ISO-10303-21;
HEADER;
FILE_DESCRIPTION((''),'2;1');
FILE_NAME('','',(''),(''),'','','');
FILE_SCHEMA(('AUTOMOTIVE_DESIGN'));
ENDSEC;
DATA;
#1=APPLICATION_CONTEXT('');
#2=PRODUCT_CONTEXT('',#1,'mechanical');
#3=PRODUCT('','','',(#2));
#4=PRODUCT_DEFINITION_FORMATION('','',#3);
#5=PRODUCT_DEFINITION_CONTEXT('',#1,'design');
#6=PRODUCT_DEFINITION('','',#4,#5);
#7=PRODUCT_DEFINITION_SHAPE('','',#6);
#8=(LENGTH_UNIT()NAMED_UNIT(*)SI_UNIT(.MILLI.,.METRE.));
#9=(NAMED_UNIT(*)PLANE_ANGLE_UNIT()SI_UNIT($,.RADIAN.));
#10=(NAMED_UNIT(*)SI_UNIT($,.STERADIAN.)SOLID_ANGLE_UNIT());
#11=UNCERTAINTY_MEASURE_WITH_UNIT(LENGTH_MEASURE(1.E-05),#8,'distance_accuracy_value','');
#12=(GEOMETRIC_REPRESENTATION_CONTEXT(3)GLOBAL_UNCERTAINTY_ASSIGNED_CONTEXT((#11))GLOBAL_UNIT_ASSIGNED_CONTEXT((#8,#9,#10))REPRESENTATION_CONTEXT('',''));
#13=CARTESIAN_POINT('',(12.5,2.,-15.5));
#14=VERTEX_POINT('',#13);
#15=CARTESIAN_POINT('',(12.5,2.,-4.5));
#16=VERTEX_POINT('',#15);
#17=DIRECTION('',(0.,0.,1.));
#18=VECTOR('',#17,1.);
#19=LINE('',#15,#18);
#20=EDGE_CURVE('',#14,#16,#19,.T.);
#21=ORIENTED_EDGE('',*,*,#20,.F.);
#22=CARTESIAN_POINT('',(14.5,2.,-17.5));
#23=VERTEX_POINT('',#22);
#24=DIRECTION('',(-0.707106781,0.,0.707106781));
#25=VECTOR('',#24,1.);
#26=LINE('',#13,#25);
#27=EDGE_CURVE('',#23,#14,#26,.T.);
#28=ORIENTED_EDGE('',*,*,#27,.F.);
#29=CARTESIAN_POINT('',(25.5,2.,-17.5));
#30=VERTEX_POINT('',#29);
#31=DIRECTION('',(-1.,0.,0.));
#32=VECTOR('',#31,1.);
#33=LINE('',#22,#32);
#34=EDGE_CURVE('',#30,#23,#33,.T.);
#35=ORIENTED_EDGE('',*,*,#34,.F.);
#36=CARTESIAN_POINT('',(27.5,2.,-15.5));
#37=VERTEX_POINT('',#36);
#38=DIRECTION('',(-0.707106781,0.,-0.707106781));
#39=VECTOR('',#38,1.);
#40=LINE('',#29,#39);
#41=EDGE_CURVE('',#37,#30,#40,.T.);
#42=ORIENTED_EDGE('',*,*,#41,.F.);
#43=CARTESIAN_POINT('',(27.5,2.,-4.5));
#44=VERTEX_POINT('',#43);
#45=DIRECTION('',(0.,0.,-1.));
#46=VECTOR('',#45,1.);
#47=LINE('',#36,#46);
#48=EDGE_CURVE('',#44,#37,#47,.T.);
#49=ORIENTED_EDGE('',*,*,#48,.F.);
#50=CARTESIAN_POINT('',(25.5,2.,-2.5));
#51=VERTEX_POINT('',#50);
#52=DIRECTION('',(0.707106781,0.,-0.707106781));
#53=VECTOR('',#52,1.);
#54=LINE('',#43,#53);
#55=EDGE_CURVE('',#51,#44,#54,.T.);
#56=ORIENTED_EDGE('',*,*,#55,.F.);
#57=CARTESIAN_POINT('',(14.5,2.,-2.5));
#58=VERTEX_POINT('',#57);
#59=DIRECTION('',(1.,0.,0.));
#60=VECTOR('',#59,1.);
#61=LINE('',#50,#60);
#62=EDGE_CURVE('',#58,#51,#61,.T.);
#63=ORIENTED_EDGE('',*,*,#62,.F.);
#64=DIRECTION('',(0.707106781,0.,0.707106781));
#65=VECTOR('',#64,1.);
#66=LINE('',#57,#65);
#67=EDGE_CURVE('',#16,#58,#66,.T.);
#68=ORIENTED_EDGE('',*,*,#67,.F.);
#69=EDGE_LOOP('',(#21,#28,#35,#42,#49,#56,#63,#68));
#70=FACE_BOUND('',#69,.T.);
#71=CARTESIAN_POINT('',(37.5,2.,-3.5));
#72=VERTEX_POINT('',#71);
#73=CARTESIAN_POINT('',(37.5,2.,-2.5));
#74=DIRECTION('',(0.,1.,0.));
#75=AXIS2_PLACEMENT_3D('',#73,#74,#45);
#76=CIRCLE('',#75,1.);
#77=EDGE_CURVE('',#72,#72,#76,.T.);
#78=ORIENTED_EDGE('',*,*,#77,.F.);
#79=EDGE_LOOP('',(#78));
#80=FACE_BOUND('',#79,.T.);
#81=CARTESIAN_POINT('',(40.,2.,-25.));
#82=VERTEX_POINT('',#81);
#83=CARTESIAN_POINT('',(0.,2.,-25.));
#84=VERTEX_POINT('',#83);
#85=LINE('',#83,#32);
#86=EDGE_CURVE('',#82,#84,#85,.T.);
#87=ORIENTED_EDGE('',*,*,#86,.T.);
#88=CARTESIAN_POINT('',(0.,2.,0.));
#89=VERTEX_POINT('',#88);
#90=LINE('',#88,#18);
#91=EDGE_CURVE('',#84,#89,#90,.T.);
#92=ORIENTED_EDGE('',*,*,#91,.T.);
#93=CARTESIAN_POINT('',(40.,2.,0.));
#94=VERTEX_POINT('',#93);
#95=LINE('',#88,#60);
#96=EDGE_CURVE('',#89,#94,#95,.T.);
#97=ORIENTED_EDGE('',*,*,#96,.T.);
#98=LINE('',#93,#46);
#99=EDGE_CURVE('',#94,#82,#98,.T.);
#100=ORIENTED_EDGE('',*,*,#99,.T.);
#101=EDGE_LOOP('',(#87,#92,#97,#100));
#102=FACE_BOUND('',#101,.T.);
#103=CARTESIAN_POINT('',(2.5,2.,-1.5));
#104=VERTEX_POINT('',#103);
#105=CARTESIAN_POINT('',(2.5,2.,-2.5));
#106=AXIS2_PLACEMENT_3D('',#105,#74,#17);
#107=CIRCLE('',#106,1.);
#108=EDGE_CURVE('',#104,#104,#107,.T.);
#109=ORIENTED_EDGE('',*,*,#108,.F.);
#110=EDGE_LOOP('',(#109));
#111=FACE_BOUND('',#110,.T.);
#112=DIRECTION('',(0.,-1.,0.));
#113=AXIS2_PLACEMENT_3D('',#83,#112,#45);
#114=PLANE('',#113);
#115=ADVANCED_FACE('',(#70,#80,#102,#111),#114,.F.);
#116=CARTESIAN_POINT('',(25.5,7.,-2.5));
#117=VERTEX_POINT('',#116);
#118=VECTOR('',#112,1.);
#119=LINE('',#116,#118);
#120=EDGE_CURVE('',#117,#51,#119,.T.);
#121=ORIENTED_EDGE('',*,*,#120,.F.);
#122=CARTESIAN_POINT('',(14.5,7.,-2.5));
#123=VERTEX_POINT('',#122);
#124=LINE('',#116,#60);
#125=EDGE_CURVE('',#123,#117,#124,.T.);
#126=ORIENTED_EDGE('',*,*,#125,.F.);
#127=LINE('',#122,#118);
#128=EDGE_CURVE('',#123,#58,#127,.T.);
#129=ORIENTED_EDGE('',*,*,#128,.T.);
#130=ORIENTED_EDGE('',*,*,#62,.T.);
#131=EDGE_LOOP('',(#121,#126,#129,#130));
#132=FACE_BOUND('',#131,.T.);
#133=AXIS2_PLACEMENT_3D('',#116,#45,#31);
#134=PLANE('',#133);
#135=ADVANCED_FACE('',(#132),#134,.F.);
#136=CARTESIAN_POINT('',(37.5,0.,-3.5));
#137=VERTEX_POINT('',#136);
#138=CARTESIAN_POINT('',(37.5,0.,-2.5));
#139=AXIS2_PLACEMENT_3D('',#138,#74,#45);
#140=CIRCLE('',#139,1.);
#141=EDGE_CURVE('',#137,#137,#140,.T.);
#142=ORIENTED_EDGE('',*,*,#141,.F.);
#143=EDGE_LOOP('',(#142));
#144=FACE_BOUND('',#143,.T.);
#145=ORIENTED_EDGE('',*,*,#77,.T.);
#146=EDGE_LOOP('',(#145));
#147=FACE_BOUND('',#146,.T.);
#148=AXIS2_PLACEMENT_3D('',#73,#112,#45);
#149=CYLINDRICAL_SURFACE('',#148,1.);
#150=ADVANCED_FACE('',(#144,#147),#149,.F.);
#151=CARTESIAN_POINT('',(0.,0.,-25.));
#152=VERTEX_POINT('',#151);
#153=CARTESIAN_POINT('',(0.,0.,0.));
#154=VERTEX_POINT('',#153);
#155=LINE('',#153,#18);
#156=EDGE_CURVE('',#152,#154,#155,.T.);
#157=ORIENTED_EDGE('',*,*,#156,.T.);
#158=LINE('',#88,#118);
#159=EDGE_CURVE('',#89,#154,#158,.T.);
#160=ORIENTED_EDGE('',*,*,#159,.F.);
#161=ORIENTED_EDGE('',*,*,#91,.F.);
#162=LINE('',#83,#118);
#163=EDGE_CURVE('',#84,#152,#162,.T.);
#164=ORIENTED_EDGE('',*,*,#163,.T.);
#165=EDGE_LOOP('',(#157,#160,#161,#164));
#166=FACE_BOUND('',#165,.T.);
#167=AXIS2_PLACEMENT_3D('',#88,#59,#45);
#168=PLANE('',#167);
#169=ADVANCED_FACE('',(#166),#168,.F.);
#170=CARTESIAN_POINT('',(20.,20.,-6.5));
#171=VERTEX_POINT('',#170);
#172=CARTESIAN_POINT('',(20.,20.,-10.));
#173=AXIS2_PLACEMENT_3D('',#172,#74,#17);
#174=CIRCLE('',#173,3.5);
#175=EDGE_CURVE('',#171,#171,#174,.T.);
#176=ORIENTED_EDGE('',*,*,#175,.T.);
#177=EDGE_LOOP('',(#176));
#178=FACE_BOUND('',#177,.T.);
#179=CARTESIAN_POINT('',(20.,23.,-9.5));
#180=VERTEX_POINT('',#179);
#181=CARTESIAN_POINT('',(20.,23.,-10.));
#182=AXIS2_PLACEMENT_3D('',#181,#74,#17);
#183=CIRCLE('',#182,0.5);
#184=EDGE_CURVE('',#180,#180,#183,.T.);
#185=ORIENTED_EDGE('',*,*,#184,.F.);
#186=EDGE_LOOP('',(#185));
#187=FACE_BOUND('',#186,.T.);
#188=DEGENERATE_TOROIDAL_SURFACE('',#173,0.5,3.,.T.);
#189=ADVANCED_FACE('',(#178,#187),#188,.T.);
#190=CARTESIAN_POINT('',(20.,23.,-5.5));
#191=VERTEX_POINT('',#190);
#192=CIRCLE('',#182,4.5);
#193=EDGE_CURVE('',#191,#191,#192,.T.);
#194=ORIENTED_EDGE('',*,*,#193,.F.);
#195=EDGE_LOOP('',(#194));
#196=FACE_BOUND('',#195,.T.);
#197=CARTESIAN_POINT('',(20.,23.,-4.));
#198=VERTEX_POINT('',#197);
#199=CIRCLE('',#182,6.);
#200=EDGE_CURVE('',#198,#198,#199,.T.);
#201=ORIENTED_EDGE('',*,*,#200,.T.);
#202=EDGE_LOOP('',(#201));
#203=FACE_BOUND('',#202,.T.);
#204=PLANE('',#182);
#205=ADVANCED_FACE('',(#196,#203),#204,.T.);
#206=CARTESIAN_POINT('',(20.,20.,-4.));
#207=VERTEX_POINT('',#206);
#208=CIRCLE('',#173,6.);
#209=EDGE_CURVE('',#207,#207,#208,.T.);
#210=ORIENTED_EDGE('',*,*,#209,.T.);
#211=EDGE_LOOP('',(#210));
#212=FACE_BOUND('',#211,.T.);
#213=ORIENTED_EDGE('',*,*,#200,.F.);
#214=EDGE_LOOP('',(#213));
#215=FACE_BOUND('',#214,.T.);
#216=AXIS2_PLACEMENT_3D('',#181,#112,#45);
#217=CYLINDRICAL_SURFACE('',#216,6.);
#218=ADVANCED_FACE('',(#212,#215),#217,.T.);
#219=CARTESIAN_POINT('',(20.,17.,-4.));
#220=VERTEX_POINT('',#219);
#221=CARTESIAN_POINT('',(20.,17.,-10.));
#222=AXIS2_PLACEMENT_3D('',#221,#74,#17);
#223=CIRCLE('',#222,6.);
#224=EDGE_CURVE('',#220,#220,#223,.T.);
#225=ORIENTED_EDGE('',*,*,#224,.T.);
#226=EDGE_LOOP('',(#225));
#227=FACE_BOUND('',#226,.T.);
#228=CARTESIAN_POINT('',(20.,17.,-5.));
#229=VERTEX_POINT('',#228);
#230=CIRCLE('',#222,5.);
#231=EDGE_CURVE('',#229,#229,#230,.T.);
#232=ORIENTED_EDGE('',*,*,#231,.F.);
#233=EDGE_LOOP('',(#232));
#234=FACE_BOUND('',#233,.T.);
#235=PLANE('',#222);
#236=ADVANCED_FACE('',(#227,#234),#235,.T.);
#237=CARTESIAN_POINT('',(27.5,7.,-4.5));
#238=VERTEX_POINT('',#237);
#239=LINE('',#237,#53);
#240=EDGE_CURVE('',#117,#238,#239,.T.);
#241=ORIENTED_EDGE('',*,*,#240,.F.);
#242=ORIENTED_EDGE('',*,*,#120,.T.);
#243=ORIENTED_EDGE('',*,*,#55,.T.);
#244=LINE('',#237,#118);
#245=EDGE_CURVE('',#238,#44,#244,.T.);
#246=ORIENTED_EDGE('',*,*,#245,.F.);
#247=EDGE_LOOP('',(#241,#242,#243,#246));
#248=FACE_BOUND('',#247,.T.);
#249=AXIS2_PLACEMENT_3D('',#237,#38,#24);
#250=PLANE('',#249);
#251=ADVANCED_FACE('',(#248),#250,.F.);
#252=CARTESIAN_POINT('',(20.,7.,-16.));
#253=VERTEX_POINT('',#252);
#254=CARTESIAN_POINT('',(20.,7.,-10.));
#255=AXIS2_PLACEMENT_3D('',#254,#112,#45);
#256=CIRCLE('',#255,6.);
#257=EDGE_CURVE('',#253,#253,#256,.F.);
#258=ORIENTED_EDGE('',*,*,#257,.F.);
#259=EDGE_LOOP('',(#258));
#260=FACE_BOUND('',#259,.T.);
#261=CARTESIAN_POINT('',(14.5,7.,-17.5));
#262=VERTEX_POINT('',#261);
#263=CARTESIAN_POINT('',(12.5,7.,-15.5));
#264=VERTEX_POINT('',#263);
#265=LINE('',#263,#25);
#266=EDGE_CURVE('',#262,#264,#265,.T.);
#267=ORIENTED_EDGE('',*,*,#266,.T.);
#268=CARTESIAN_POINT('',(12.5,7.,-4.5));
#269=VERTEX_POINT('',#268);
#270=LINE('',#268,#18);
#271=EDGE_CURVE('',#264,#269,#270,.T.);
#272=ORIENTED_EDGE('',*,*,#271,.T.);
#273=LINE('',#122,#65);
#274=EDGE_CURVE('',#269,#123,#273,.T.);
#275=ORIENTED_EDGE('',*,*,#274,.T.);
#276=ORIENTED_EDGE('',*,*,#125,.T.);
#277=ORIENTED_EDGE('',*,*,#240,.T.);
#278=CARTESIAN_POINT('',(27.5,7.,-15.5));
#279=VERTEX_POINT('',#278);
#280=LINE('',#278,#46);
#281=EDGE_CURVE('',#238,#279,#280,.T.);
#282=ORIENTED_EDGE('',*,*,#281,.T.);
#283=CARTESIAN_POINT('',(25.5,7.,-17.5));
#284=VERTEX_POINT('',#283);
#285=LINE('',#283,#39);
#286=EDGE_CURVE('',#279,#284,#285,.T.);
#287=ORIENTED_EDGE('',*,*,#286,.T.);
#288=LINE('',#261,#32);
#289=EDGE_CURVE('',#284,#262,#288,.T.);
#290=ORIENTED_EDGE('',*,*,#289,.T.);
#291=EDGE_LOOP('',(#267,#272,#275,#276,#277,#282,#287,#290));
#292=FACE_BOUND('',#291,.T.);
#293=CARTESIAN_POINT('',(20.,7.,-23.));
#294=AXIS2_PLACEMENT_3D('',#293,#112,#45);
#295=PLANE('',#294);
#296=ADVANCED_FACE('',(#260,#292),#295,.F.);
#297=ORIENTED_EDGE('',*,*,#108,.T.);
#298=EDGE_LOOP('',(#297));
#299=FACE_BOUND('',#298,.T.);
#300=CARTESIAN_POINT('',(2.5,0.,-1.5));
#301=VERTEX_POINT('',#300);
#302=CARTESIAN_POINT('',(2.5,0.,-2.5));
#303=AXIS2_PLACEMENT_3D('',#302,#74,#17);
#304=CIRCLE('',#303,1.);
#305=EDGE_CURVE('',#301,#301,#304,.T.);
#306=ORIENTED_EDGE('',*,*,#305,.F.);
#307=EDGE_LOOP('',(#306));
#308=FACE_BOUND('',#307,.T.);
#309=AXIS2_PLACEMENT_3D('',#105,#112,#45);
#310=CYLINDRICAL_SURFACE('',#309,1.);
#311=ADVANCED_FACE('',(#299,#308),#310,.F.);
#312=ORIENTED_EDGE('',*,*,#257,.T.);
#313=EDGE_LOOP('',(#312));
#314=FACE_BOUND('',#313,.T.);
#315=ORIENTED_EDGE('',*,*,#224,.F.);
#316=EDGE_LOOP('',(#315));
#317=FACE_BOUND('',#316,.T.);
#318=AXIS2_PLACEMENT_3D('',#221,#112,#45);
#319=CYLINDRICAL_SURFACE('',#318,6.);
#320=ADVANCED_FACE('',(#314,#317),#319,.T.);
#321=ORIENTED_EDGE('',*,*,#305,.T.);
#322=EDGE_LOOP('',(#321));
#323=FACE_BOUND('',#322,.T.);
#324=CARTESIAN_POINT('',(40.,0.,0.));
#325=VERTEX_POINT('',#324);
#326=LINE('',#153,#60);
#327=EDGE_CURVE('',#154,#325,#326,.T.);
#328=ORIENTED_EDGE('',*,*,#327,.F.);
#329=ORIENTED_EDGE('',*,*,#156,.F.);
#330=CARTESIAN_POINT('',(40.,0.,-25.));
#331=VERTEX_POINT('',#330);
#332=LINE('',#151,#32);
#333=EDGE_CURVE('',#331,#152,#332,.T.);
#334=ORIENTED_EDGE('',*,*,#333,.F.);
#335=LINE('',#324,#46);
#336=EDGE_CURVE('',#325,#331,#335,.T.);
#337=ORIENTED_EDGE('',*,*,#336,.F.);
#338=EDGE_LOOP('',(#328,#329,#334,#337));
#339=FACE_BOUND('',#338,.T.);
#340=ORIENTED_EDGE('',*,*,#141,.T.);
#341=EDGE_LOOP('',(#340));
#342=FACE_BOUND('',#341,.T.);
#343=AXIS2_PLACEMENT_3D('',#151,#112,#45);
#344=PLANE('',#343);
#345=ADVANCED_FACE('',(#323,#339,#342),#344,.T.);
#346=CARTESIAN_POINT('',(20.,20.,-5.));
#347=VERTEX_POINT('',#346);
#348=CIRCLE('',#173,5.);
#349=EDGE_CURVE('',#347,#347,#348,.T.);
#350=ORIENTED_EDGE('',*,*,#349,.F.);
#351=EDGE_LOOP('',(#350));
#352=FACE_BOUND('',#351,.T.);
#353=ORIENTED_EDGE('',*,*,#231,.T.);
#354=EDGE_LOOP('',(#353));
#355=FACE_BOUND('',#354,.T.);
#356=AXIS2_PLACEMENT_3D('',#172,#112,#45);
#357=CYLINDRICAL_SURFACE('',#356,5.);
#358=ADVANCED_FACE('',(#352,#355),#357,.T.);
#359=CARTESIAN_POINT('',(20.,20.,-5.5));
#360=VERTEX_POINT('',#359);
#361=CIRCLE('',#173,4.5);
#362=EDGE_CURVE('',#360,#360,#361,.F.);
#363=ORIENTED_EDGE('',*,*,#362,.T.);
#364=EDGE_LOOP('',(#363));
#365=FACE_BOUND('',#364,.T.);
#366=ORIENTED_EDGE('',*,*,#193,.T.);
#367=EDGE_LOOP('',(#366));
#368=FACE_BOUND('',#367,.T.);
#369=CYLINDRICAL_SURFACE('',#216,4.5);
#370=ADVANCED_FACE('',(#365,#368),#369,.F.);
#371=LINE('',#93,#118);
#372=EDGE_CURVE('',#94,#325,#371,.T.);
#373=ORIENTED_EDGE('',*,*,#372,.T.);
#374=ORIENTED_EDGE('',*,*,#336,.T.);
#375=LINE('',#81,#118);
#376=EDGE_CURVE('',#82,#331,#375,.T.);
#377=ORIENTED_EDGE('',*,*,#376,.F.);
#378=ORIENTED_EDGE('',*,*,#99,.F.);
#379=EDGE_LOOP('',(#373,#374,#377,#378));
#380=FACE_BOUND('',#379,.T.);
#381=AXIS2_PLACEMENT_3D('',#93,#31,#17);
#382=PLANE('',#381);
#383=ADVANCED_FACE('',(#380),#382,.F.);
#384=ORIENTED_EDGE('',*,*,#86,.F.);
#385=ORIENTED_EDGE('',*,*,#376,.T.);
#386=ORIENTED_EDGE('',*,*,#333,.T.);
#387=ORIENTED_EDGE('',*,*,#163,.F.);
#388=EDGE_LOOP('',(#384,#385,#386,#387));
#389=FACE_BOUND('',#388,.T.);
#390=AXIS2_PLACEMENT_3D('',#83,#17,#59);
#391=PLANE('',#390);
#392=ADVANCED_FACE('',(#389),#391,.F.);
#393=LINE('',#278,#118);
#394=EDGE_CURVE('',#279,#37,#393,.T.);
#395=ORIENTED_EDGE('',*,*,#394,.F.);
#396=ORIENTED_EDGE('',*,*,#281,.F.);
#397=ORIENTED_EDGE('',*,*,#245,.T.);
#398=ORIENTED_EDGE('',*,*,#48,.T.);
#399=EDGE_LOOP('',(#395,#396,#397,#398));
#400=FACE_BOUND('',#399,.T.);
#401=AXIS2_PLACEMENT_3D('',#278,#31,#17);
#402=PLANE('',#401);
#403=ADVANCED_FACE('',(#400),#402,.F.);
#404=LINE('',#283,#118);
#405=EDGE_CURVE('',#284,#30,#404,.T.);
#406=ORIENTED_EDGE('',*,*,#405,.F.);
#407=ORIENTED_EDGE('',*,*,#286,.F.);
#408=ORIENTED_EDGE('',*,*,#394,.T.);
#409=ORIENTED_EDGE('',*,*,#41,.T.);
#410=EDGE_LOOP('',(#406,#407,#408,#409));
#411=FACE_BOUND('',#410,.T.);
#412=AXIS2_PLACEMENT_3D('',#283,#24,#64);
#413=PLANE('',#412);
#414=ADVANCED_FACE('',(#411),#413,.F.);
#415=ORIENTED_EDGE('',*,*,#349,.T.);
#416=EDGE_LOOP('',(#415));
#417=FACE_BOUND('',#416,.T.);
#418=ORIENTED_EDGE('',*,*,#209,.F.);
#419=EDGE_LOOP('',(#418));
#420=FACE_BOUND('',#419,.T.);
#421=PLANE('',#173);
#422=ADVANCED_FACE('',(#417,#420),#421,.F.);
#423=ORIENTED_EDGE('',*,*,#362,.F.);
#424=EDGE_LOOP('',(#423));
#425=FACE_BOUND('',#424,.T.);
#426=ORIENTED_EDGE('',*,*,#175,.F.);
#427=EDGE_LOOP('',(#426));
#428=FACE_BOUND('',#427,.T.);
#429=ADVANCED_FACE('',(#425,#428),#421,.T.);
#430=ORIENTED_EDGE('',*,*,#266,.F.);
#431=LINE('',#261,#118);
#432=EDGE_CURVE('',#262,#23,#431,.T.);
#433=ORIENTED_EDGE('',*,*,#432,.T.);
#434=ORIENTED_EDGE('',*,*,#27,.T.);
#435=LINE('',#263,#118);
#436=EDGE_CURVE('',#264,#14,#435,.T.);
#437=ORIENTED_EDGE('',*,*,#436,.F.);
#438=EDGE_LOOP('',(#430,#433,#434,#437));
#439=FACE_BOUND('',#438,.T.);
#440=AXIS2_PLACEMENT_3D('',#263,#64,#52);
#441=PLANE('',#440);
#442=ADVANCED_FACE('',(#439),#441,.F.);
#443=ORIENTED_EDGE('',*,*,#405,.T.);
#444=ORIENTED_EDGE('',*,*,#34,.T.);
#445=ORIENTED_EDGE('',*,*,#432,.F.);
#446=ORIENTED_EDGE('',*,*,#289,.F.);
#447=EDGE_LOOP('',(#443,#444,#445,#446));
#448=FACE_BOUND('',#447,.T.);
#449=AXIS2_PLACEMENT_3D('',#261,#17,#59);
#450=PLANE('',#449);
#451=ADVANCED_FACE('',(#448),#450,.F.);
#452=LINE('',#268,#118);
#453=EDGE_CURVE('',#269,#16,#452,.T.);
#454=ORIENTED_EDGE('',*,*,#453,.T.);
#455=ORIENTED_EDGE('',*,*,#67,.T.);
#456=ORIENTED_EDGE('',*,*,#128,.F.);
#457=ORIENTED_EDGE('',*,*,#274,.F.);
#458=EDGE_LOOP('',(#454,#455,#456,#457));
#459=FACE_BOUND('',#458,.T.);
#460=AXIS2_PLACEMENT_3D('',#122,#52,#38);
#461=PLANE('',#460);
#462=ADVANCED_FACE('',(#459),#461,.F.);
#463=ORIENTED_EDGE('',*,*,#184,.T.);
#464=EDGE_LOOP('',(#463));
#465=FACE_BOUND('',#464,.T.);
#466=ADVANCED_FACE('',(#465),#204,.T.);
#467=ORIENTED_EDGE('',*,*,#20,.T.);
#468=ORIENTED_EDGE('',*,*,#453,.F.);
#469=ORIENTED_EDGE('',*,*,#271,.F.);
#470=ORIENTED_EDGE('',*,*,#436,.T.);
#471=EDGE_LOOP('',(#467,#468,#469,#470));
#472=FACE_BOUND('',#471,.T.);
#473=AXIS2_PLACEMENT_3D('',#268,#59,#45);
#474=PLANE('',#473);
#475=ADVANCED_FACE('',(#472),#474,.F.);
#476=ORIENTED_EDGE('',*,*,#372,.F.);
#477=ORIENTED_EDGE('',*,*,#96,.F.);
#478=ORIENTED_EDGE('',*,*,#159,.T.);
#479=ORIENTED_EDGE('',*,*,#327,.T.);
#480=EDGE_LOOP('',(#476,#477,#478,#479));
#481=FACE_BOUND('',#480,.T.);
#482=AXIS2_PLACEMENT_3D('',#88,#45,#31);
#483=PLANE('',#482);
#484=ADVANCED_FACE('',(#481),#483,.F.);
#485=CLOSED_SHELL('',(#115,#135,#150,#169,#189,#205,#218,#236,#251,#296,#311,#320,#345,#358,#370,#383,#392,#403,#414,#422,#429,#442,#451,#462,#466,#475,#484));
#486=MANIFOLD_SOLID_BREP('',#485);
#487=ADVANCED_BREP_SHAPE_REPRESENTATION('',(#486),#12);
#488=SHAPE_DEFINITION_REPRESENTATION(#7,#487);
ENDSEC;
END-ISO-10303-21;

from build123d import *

# Parameters (mm, degrees)
ESQUISSE1_W      = 40
ESQUISSE1_H      = 25
ESQUISSE1_R      = 1
EXTRUSION1_DEPTH = 2
EXTRUSION2_DEPTH = 5
ESQUISSE3_R      = 6
EXTRUSION3_DEPTH = 10
ESQUISSE4_R      = 5
EXTRUSION4_DEPTH = 3
ESQUISSE5_R      = 6
ESQUISSE5_R_2    = 4.5
EXTRUSION5_DEPTH = 3
ESQUISSE6_R      = 3.5
EXTRUSION6_DEPTH = 3
CONG_1_R         = 3


with BuildPart() as part:
    # Esquisse1 → Extrusion1 (new body)
    with BuildSketch(Plane(origin=(0, 0, 0), x_dir=(1, 0, 0), z_dir=(0, 1, 0))):
        with Locations((20, 12.5)):
            Rectangle(ESQUISSE1_W, ESQUISSE1_H)
        with Locations(Location((2.5, 2.5, 0), (0, 0, 270))):
            Circle(ESQUISSE1_R, mode=Mode.SUBTRACT)
        with Locations(Location((37.5, 2.5, 0), (0, 0, 90))):
            Circle(ESQUISSE1_R, mode=Mode.SUBTRACT)
    extrude(amount=EXTRUSION1_DEPTH)

    # Esquisse2 → Extrusion2 (add)
    with BuildSketch(Plane(origin=(0, 2, 0), x_dir=(-1, 0, 0), z_dir=(0, 1, 0))):
        Polygon((-14.5, -17.5), (-25.5, -17.5), (-27.5, -15.5), (-27.5, -4.5), (-25.5, -2.5), (-14.5, -2.5), (-12.5, -4.5), (-12.5, -15.5), align=None)
    extrude(amount=EXTRUSION2_DEPTH)

    # Esquisse3 → Extrusion3 (add)
    with BuildSketch(Plane(origin=(0, 7, 0), x_dir=(1, 0, 0), z_dir=(0, 1, 0))):
        with Locations(Location((20, 10, 0), (0, 0, 90))):
            Circle(ESQUISSE3_R)
    extrude(amount=EXTRUSION3_DEPTH)

    # Esquisse4 → Extrusion4 (add)
    with BuildSketch(Plane(origin=(0, 17, 0), x_dir=(1, 0, 0), z_dir=(0, 1, 0))):
        with Locations(Location((20, 10, 0), (0, 0, 270))):
            Circle(ESQUISSE4_R)
    extrude(amount=EXTRUSION4_DEPTH)

    # Esquisse5 → Extrusion5 (add)
    with BuildSketch(Plane(origin=(0, 20, 0), x_dir=(1, 0, 0), z_dir=(0, 1, 0))):
        with Locations(Location((20, 10, 0), (0, 0, 90))):
            Circle(ESQUISSE5_R)
        with Locations(Location((20, 10, 0), (0, 0, 270))):
            Circle(ESQUISSE5_R_2, mode=Mode.SUBTRACT)
    extrude(amount=EXTRUSION5_DEPTH)

    # Esquisse6 → Extrusion6 (add)
    with BuildSketch(Plane(origin=(0, 20, 0), x_dir=(1, 0, 0), z_dir=(0, 1, 0))):
        with Locations(Location((20, 10, 0), (0, 0, 270))):
            Circle(ESQUISSE6_R)
    extrude(amount=EXTRUSION6_DEPTH)

    # Congé1
    cong_1_edges = [part.edges().sort_by_distance(p)[0] for p in [
        (20, 23, -13.5),
    ]]
    fillet(cong_1_edges, radius=CONG_1_R - 0.0001)  # a hair under: the kernel refuses the full size


solid = part.part
